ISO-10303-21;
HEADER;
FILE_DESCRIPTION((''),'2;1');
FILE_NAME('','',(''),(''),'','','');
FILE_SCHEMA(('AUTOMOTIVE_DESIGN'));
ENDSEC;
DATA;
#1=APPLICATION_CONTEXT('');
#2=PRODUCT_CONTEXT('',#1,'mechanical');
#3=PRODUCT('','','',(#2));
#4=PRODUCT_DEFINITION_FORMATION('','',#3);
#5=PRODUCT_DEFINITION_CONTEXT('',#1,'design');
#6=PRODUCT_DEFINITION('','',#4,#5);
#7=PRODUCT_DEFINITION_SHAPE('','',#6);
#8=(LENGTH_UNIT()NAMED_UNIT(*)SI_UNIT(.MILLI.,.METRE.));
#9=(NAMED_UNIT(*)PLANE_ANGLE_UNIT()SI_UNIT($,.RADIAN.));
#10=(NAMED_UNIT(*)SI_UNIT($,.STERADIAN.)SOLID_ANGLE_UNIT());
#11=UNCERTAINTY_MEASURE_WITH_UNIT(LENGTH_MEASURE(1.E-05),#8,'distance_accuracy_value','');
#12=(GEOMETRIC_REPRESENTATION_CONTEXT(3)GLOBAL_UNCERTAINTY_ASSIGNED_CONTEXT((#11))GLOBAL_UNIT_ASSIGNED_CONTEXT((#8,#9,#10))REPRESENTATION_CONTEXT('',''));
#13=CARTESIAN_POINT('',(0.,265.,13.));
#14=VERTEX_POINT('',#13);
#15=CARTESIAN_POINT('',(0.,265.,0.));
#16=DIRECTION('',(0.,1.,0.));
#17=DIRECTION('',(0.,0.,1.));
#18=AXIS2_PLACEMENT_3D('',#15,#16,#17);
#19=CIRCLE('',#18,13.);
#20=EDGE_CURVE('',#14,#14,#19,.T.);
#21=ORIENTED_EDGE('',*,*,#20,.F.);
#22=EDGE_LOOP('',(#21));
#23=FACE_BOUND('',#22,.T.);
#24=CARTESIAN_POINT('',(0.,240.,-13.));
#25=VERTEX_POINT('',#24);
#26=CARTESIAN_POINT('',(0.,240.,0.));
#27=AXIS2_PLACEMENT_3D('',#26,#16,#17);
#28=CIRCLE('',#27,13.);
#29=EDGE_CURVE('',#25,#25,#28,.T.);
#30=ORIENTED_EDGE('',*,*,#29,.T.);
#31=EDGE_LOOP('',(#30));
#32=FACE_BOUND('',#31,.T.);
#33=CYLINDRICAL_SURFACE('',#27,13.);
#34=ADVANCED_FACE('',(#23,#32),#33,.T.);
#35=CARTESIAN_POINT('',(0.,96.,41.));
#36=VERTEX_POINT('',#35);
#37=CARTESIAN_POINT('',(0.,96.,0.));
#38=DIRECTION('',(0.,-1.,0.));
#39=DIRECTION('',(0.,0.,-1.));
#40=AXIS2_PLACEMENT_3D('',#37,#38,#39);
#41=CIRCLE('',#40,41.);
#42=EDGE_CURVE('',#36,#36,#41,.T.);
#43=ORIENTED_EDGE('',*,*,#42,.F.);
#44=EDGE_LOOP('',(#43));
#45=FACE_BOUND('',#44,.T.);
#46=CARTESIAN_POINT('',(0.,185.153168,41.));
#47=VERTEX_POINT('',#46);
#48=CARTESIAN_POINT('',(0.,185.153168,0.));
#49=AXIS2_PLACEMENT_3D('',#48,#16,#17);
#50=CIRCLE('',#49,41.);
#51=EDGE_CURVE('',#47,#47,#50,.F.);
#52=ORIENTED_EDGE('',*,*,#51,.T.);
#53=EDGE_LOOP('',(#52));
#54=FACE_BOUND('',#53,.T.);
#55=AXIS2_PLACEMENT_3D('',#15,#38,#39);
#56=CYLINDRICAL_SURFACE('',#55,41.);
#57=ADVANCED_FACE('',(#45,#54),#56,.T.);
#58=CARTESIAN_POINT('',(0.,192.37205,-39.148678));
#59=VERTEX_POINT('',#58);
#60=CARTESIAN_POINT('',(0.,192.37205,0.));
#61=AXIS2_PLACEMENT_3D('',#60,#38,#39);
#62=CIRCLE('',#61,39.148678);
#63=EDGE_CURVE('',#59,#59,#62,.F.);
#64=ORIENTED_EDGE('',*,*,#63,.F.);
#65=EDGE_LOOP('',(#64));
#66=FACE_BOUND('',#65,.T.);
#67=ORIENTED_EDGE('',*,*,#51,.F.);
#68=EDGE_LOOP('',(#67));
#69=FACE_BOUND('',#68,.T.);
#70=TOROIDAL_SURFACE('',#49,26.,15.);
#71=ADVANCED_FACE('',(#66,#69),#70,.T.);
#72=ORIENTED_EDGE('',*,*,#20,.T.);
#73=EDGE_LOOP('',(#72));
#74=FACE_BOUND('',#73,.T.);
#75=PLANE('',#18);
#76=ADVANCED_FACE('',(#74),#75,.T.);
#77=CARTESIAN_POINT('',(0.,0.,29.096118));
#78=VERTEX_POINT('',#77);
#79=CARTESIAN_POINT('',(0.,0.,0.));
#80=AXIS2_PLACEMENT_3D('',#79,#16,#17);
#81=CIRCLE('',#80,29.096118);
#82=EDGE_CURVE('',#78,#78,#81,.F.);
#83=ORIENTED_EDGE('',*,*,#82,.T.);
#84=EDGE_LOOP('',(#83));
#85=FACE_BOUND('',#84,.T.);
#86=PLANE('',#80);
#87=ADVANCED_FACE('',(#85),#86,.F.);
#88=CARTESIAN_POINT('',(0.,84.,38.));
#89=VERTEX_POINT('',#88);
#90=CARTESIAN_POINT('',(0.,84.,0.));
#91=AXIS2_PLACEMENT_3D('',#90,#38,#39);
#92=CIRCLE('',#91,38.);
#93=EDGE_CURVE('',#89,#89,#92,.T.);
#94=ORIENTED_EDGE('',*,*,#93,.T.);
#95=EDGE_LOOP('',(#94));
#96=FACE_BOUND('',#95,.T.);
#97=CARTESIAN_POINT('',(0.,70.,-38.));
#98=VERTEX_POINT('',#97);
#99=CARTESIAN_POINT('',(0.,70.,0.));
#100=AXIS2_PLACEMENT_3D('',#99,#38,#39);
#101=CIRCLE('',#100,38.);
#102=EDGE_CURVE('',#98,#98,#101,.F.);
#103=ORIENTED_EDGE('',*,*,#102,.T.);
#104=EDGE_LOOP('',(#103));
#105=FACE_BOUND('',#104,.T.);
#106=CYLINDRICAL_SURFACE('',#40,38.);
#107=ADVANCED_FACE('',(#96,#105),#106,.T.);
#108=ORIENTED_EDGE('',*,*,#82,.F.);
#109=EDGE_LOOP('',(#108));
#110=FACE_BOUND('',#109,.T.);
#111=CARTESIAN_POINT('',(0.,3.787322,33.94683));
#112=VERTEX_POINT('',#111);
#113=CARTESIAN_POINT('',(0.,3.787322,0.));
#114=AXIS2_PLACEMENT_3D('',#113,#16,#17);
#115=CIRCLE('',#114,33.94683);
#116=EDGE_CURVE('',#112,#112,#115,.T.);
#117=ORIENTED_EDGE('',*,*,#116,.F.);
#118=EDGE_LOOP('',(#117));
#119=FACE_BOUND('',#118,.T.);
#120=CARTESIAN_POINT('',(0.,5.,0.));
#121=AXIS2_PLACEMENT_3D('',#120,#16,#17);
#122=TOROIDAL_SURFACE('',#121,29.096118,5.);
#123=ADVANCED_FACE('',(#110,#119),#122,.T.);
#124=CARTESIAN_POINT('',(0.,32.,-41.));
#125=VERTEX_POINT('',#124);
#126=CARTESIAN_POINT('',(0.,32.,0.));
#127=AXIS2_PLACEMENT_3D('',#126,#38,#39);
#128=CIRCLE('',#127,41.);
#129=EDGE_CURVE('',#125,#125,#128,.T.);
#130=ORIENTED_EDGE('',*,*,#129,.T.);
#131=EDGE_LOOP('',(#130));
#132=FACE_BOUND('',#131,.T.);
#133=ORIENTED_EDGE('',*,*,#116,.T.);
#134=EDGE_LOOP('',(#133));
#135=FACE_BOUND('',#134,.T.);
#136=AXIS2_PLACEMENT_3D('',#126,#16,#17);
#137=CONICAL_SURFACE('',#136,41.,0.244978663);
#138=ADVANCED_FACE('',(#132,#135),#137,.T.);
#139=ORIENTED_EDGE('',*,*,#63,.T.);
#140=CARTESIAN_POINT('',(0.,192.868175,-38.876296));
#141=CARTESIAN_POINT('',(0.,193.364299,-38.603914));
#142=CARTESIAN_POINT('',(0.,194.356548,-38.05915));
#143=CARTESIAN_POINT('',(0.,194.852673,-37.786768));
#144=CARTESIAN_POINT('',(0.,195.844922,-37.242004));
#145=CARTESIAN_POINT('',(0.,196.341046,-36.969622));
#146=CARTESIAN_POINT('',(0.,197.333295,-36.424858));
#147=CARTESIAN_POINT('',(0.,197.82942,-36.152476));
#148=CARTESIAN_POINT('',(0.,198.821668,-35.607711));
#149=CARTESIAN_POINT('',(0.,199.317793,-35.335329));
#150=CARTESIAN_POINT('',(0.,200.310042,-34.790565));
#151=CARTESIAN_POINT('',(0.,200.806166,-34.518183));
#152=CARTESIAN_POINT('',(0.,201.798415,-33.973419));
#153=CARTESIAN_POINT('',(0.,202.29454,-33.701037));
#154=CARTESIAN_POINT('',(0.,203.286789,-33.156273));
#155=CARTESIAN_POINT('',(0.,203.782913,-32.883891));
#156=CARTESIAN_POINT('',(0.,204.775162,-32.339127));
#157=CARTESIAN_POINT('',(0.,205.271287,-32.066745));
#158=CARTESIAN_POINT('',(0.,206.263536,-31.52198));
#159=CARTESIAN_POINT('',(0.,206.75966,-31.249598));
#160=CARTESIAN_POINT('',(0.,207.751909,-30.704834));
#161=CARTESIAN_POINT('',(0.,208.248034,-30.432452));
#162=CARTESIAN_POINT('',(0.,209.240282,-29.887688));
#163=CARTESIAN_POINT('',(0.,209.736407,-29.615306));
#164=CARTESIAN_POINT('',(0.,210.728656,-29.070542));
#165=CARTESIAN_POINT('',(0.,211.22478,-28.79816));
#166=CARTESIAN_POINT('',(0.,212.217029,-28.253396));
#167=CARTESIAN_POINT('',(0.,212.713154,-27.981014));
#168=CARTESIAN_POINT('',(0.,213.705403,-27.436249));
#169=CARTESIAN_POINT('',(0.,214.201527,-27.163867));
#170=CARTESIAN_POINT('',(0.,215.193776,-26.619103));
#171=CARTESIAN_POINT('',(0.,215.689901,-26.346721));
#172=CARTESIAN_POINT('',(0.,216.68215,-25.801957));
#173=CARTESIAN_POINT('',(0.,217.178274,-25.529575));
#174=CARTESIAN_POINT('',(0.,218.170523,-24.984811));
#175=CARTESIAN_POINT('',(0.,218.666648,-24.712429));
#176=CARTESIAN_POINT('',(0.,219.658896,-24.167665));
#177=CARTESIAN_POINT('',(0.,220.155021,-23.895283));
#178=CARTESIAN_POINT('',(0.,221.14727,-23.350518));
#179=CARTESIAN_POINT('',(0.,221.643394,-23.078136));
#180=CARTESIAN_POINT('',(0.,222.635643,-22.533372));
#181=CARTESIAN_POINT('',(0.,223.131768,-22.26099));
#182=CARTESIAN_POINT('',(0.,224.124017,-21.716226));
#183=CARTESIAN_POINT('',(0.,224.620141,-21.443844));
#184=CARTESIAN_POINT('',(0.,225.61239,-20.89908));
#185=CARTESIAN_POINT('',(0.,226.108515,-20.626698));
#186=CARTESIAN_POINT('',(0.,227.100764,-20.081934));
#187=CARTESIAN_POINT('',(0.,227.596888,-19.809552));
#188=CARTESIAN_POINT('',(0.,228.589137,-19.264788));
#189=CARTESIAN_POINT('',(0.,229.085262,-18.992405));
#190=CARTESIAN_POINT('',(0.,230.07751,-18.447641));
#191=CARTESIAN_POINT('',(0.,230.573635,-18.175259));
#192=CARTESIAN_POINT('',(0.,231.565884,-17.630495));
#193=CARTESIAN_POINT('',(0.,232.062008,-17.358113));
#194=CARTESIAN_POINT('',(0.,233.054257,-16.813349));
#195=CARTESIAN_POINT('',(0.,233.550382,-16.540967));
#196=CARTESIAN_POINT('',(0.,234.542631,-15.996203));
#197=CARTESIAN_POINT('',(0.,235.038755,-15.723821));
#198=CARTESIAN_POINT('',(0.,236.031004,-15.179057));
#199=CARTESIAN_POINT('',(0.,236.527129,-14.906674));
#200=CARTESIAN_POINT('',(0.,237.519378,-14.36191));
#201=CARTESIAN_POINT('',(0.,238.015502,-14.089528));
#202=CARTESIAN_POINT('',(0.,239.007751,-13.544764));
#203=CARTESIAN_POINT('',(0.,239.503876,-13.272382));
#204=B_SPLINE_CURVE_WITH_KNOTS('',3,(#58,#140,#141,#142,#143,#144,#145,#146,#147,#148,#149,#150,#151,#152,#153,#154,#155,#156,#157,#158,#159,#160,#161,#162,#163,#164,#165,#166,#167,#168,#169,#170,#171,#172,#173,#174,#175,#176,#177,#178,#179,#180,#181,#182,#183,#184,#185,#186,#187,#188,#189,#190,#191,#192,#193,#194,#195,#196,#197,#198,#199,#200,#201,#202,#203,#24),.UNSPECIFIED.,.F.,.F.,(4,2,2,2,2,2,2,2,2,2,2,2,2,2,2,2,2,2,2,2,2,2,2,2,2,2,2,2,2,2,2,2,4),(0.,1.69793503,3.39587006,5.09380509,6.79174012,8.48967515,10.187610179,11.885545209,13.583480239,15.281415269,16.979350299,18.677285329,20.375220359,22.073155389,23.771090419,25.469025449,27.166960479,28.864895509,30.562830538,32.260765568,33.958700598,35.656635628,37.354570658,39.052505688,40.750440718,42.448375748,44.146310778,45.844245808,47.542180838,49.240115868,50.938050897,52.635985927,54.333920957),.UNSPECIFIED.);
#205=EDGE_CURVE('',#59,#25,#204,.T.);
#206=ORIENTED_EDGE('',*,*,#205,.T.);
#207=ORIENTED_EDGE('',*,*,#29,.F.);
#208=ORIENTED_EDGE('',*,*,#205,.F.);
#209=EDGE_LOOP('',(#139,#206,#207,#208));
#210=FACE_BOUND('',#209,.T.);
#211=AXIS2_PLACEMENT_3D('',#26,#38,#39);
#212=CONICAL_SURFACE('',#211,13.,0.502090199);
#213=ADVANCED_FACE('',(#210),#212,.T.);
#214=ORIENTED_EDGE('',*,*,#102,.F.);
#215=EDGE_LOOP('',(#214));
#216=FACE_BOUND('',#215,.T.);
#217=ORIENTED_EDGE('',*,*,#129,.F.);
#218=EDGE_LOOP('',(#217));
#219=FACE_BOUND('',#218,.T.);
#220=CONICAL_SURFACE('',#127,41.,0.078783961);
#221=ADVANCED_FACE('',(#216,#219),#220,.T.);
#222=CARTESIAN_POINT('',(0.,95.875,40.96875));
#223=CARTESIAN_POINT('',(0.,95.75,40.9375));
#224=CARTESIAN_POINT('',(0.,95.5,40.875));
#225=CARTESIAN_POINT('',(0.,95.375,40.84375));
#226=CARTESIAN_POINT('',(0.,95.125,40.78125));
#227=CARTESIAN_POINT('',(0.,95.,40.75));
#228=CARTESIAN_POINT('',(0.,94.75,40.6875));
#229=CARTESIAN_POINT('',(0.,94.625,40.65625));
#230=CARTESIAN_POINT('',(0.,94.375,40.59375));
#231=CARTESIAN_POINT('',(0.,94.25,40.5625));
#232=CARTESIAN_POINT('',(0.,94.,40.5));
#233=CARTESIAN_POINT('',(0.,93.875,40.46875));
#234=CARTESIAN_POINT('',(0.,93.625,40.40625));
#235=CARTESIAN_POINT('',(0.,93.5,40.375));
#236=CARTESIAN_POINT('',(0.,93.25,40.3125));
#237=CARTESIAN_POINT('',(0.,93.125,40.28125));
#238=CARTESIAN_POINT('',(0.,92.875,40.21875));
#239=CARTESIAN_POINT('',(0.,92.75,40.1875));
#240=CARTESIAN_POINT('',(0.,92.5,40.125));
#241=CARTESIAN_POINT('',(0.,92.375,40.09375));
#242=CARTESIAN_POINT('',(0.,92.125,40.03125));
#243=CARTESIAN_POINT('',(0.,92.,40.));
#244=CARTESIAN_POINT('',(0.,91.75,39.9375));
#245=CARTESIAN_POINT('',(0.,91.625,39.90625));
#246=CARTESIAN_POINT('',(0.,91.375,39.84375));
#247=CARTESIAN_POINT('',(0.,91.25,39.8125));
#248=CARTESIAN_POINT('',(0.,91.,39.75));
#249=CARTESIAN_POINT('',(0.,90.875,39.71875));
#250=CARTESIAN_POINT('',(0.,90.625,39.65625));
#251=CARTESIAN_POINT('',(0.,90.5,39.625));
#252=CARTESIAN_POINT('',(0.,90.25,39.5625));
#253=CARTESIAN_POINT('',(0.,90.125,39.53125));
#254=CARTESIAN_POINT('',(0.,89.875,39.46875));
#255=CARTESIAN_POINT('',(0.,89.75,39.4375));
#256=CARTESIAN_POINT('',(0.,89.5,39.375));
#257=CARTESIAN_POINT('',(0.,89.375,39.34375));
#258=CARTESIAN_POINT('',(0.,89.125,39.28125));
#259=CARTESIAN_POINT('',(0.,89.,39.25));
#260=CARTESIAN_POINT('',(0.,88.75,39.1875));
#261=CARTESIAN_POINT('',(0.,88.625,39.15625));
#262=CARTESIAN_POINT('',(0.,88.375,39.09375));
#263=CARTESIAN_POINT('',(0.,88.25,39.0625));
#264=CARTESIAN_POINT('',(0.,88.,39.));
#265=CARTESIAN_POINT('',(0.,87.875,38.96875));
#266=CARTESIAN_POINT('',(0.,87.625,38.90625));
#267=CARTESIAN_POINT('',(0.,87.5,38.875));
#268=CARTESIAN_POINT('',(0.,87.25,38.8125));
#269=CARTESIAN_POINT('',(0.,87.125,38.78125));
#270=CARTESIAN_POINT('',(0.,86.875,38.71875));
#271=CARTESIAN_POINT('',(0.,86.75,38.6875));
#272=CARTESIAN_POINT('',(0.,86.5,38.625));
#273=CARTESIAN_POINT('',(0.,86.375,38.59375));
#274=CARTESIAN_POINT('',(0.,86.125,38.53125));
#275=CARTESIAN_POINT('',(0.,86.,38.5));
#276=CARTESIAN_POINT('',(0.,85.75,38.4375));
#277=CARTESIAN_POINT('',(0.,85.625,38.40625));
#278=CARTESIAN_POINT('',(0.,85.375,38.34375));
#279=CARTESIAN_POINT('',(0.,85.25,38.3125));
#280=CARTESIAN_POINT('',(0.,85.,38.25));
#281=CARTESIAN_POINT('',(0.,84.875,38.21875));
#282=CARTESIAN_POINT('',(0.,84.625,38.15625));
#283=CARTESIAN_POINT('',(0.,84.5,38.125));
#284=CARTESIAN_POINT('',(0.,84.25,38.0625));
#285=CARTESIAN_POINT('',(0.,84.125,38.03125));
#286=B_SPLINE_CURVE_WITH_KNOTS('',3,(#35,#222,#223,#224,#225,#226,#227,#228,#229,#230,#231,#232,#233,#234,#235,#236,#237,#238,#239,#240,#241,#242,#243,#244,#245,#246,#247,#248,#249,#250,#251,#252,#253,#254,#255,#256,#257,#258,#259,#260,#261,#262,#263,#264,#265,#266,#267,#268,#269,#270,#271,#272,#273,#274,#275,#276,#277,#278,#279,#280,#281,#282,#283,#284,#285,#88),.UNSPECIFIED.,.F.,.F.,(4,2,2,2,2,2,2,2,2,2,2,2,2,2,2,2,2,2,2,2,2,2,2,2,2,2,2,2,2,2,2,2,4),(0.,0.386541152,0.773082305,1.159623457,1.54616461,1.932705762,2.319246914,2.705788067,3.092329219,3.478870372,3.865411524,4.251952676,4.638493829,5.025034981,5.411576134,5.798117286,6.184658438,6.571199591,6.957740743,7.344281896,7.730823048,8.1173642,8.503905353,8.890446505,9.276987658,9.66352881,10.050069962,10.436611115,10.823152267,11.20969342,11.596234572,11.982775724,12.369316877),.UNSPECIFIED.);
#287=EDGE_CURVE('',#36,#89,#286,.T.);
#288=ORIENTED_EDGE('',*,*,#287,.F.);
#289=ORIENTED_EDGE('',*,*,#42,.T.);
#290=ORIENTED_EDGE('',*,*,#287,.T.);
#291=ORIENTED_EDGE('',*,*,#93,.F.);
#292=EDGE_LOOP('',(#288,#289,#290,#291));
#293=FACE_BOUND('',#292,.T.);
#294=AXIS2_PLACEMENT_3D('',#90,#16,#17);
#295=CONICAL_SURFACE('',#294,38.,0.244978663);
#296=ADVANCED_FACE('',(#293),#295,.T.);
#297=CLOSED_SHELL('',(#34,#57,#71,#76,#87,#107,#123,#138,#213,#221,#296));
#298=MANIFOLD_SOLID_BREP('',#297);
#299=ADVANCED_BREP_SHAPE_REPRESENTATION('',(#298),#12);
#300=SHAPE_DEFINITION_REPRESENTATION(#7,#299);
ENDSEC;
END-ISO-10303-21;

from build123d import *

# Parameters (mm, degrees)
SKETCH1_R           = 41
BOSS_EXTRUDE1_DEPTH = 265
SKETCH2_OUTSIDE_W   = 141.852
SKETCH2_OUTSIDE_H   = 141.852
SKETCH2_OUTSIDE_R   = 13
CUT_EXTRUDE1_DEPTH  = 25
CHAMFER1_SIZE2      = 28
CHAMFER1_SIZE       = 51
CUT_EXTRUDE2_START  = -32
SKETCH3_OUTSIDE_W   = 141.852
SKETCH3_OUTSIDE_H   = 141.852
SKETCH3_OUTSIDE_R   = 38
CUT_EXTRUDE2_DEPTH  = 64
CHAMFER2_SIZE2      = 38
CHAMFER2_SIZE       = 3
CHAMFER3_SIZE2      = 3
CHAMFER3_SIZE       = 12
CHAMFER4_SIZE2      = 8
CHAMFER4_SIZE       = 32
FILLET1_R           = 5
FILLET2_R           = 15


with BuildPart() as part:
    # Sketch1 → Boss-Extrude1 (new body)
    with BuildSketch(Plane(origin=(0, 0, 0), x_dir=(1, 0, 0), z_dir=(0, 1, 0))):
        with Locations(Location((0, 0, 0), (0, 0, 270))):
            Circle(SKETCH1_R)
    extrude(amount=BOSS_EXTRUDE1_DEPTH)

    # Sketch2 outside → Cut-Extrude1 (cut)
    with BuildSketch(Plane(origin=(0, 265, 0), x_dir=(1, 0, 0), z_dir=(0, 1, 0))):
        Rectangle(SKETCH2_OUTSIDE_W, SKETCH2_OUTSIDE_H)
        with Locations(Location((0, 0, 0), (0, 0, 270))):
            Circle(SKETCH2_OUTSIDE_R, mode=Mode.SUBTRACT)
    extrude(amount=-CUT_EXTRUDE1_DEPTH, mode=Mode.SUBTRACT)

    # Chamfer1
    chamfer1_edges = [part.edges().sort_by_distance(p)[0] for p in [
        (0, 240, -41),
    ]]
    chamfer1_side = [part.faces().sort_by_distance(p)[0] for p in [
        (0, 239.44, -41),
    ]]
    chamfer(chamfer1_edges, length=CHAMFER1_SIZE - 0.0001, length2=CHAMFER1_SIZE2 - 0.0001, reference=chamfer1_side[0])  # a hair under: the kernel refuses the full size

    # Sketch3 outside → Cut-Extrude2 (cut)
    with BuildSketch(Plane.XZ.offset(CUT_EXTRUDE2_START)):
        Rectangle(SKETCH3_OUTSIDE_W, SKETCH3_OUTSIDE_H)
        with Locations(Location((0, 0, 0), (0, 0, 270))):
            Circle(SKETCH3_OUTSIDE_R, mode=Mode.SUBTRACT)
    extrude(amount=-CUT_EXTRUDE2_DEPTH, mode=Mode.SUBTRACT)

    # Chamfer2
    chamfer2_edges = [part.edges().sort_by_distance(p)[0] for p in [
        (0, 32, 38),
    ]]
    chamfer2_side = [part.faces().sort_by_distance(p)[0] for p in [
        (0, 32, 38.06),
    ]]
    chamfer(chamfer2_edges, length=CHAMFER2_SIZE - 0.0001, length2=CHAMFER2_SIZE2 - 0.0001, reference=chamfer2_side[0])  # a hair under: the kernel refuses the full size

    # Chamfer3
    chamfer3_edges = [part.edges().sort_by_distance(p)[0] for p in [
        (0, 96, 38),
    ]]
    chamfer3_side = [part.faces().sort_by_distance(p)[0] for p in [
        (0, 95.94, 38),
    ]]
    chamfer(chamfer3_edges, length=CHAMFER3_SIZE - 0.0001, length2=CHAMFER3_SIZE2 - 0.0001, reference=chamfer3_side[0])  # a hair under: the kernel refuses the full size

    # Chamfer4
    chamfer4_edges = [part.edges().sort_by_distance(p)[0] for p in [
        (0, 0, -41),
    ]]
    chamfer4_side = [part.faces().sort_by_distance(p)[0] for p in [
        (0, 0.16, -41),
    ]]
    chamfer(chamfer4_edges, length=CHAMFER4_SIZE - 0.0001, length2=CHAMFER4_SIZE2 - 0.0001, reference=chamfer4_side[0])  # a hair under: the kernel refuses the full size

    # Fillet1
    fillet1_edges = [part.edges().sort_by_distance(p)[0] for p in [
        (0, 0, -33.0001),
    ]]
    fillet(fillet1_edges, radius=FILLET1_R)

    # Fillet2
    fillet2_edges = [part.edges().sort_by_distance(p)[0] for p in [
        (0, 189.0001, -41),
    ]]
    fillet(fillet2_edges, radius=FILLET2_R)


solid = part.part
